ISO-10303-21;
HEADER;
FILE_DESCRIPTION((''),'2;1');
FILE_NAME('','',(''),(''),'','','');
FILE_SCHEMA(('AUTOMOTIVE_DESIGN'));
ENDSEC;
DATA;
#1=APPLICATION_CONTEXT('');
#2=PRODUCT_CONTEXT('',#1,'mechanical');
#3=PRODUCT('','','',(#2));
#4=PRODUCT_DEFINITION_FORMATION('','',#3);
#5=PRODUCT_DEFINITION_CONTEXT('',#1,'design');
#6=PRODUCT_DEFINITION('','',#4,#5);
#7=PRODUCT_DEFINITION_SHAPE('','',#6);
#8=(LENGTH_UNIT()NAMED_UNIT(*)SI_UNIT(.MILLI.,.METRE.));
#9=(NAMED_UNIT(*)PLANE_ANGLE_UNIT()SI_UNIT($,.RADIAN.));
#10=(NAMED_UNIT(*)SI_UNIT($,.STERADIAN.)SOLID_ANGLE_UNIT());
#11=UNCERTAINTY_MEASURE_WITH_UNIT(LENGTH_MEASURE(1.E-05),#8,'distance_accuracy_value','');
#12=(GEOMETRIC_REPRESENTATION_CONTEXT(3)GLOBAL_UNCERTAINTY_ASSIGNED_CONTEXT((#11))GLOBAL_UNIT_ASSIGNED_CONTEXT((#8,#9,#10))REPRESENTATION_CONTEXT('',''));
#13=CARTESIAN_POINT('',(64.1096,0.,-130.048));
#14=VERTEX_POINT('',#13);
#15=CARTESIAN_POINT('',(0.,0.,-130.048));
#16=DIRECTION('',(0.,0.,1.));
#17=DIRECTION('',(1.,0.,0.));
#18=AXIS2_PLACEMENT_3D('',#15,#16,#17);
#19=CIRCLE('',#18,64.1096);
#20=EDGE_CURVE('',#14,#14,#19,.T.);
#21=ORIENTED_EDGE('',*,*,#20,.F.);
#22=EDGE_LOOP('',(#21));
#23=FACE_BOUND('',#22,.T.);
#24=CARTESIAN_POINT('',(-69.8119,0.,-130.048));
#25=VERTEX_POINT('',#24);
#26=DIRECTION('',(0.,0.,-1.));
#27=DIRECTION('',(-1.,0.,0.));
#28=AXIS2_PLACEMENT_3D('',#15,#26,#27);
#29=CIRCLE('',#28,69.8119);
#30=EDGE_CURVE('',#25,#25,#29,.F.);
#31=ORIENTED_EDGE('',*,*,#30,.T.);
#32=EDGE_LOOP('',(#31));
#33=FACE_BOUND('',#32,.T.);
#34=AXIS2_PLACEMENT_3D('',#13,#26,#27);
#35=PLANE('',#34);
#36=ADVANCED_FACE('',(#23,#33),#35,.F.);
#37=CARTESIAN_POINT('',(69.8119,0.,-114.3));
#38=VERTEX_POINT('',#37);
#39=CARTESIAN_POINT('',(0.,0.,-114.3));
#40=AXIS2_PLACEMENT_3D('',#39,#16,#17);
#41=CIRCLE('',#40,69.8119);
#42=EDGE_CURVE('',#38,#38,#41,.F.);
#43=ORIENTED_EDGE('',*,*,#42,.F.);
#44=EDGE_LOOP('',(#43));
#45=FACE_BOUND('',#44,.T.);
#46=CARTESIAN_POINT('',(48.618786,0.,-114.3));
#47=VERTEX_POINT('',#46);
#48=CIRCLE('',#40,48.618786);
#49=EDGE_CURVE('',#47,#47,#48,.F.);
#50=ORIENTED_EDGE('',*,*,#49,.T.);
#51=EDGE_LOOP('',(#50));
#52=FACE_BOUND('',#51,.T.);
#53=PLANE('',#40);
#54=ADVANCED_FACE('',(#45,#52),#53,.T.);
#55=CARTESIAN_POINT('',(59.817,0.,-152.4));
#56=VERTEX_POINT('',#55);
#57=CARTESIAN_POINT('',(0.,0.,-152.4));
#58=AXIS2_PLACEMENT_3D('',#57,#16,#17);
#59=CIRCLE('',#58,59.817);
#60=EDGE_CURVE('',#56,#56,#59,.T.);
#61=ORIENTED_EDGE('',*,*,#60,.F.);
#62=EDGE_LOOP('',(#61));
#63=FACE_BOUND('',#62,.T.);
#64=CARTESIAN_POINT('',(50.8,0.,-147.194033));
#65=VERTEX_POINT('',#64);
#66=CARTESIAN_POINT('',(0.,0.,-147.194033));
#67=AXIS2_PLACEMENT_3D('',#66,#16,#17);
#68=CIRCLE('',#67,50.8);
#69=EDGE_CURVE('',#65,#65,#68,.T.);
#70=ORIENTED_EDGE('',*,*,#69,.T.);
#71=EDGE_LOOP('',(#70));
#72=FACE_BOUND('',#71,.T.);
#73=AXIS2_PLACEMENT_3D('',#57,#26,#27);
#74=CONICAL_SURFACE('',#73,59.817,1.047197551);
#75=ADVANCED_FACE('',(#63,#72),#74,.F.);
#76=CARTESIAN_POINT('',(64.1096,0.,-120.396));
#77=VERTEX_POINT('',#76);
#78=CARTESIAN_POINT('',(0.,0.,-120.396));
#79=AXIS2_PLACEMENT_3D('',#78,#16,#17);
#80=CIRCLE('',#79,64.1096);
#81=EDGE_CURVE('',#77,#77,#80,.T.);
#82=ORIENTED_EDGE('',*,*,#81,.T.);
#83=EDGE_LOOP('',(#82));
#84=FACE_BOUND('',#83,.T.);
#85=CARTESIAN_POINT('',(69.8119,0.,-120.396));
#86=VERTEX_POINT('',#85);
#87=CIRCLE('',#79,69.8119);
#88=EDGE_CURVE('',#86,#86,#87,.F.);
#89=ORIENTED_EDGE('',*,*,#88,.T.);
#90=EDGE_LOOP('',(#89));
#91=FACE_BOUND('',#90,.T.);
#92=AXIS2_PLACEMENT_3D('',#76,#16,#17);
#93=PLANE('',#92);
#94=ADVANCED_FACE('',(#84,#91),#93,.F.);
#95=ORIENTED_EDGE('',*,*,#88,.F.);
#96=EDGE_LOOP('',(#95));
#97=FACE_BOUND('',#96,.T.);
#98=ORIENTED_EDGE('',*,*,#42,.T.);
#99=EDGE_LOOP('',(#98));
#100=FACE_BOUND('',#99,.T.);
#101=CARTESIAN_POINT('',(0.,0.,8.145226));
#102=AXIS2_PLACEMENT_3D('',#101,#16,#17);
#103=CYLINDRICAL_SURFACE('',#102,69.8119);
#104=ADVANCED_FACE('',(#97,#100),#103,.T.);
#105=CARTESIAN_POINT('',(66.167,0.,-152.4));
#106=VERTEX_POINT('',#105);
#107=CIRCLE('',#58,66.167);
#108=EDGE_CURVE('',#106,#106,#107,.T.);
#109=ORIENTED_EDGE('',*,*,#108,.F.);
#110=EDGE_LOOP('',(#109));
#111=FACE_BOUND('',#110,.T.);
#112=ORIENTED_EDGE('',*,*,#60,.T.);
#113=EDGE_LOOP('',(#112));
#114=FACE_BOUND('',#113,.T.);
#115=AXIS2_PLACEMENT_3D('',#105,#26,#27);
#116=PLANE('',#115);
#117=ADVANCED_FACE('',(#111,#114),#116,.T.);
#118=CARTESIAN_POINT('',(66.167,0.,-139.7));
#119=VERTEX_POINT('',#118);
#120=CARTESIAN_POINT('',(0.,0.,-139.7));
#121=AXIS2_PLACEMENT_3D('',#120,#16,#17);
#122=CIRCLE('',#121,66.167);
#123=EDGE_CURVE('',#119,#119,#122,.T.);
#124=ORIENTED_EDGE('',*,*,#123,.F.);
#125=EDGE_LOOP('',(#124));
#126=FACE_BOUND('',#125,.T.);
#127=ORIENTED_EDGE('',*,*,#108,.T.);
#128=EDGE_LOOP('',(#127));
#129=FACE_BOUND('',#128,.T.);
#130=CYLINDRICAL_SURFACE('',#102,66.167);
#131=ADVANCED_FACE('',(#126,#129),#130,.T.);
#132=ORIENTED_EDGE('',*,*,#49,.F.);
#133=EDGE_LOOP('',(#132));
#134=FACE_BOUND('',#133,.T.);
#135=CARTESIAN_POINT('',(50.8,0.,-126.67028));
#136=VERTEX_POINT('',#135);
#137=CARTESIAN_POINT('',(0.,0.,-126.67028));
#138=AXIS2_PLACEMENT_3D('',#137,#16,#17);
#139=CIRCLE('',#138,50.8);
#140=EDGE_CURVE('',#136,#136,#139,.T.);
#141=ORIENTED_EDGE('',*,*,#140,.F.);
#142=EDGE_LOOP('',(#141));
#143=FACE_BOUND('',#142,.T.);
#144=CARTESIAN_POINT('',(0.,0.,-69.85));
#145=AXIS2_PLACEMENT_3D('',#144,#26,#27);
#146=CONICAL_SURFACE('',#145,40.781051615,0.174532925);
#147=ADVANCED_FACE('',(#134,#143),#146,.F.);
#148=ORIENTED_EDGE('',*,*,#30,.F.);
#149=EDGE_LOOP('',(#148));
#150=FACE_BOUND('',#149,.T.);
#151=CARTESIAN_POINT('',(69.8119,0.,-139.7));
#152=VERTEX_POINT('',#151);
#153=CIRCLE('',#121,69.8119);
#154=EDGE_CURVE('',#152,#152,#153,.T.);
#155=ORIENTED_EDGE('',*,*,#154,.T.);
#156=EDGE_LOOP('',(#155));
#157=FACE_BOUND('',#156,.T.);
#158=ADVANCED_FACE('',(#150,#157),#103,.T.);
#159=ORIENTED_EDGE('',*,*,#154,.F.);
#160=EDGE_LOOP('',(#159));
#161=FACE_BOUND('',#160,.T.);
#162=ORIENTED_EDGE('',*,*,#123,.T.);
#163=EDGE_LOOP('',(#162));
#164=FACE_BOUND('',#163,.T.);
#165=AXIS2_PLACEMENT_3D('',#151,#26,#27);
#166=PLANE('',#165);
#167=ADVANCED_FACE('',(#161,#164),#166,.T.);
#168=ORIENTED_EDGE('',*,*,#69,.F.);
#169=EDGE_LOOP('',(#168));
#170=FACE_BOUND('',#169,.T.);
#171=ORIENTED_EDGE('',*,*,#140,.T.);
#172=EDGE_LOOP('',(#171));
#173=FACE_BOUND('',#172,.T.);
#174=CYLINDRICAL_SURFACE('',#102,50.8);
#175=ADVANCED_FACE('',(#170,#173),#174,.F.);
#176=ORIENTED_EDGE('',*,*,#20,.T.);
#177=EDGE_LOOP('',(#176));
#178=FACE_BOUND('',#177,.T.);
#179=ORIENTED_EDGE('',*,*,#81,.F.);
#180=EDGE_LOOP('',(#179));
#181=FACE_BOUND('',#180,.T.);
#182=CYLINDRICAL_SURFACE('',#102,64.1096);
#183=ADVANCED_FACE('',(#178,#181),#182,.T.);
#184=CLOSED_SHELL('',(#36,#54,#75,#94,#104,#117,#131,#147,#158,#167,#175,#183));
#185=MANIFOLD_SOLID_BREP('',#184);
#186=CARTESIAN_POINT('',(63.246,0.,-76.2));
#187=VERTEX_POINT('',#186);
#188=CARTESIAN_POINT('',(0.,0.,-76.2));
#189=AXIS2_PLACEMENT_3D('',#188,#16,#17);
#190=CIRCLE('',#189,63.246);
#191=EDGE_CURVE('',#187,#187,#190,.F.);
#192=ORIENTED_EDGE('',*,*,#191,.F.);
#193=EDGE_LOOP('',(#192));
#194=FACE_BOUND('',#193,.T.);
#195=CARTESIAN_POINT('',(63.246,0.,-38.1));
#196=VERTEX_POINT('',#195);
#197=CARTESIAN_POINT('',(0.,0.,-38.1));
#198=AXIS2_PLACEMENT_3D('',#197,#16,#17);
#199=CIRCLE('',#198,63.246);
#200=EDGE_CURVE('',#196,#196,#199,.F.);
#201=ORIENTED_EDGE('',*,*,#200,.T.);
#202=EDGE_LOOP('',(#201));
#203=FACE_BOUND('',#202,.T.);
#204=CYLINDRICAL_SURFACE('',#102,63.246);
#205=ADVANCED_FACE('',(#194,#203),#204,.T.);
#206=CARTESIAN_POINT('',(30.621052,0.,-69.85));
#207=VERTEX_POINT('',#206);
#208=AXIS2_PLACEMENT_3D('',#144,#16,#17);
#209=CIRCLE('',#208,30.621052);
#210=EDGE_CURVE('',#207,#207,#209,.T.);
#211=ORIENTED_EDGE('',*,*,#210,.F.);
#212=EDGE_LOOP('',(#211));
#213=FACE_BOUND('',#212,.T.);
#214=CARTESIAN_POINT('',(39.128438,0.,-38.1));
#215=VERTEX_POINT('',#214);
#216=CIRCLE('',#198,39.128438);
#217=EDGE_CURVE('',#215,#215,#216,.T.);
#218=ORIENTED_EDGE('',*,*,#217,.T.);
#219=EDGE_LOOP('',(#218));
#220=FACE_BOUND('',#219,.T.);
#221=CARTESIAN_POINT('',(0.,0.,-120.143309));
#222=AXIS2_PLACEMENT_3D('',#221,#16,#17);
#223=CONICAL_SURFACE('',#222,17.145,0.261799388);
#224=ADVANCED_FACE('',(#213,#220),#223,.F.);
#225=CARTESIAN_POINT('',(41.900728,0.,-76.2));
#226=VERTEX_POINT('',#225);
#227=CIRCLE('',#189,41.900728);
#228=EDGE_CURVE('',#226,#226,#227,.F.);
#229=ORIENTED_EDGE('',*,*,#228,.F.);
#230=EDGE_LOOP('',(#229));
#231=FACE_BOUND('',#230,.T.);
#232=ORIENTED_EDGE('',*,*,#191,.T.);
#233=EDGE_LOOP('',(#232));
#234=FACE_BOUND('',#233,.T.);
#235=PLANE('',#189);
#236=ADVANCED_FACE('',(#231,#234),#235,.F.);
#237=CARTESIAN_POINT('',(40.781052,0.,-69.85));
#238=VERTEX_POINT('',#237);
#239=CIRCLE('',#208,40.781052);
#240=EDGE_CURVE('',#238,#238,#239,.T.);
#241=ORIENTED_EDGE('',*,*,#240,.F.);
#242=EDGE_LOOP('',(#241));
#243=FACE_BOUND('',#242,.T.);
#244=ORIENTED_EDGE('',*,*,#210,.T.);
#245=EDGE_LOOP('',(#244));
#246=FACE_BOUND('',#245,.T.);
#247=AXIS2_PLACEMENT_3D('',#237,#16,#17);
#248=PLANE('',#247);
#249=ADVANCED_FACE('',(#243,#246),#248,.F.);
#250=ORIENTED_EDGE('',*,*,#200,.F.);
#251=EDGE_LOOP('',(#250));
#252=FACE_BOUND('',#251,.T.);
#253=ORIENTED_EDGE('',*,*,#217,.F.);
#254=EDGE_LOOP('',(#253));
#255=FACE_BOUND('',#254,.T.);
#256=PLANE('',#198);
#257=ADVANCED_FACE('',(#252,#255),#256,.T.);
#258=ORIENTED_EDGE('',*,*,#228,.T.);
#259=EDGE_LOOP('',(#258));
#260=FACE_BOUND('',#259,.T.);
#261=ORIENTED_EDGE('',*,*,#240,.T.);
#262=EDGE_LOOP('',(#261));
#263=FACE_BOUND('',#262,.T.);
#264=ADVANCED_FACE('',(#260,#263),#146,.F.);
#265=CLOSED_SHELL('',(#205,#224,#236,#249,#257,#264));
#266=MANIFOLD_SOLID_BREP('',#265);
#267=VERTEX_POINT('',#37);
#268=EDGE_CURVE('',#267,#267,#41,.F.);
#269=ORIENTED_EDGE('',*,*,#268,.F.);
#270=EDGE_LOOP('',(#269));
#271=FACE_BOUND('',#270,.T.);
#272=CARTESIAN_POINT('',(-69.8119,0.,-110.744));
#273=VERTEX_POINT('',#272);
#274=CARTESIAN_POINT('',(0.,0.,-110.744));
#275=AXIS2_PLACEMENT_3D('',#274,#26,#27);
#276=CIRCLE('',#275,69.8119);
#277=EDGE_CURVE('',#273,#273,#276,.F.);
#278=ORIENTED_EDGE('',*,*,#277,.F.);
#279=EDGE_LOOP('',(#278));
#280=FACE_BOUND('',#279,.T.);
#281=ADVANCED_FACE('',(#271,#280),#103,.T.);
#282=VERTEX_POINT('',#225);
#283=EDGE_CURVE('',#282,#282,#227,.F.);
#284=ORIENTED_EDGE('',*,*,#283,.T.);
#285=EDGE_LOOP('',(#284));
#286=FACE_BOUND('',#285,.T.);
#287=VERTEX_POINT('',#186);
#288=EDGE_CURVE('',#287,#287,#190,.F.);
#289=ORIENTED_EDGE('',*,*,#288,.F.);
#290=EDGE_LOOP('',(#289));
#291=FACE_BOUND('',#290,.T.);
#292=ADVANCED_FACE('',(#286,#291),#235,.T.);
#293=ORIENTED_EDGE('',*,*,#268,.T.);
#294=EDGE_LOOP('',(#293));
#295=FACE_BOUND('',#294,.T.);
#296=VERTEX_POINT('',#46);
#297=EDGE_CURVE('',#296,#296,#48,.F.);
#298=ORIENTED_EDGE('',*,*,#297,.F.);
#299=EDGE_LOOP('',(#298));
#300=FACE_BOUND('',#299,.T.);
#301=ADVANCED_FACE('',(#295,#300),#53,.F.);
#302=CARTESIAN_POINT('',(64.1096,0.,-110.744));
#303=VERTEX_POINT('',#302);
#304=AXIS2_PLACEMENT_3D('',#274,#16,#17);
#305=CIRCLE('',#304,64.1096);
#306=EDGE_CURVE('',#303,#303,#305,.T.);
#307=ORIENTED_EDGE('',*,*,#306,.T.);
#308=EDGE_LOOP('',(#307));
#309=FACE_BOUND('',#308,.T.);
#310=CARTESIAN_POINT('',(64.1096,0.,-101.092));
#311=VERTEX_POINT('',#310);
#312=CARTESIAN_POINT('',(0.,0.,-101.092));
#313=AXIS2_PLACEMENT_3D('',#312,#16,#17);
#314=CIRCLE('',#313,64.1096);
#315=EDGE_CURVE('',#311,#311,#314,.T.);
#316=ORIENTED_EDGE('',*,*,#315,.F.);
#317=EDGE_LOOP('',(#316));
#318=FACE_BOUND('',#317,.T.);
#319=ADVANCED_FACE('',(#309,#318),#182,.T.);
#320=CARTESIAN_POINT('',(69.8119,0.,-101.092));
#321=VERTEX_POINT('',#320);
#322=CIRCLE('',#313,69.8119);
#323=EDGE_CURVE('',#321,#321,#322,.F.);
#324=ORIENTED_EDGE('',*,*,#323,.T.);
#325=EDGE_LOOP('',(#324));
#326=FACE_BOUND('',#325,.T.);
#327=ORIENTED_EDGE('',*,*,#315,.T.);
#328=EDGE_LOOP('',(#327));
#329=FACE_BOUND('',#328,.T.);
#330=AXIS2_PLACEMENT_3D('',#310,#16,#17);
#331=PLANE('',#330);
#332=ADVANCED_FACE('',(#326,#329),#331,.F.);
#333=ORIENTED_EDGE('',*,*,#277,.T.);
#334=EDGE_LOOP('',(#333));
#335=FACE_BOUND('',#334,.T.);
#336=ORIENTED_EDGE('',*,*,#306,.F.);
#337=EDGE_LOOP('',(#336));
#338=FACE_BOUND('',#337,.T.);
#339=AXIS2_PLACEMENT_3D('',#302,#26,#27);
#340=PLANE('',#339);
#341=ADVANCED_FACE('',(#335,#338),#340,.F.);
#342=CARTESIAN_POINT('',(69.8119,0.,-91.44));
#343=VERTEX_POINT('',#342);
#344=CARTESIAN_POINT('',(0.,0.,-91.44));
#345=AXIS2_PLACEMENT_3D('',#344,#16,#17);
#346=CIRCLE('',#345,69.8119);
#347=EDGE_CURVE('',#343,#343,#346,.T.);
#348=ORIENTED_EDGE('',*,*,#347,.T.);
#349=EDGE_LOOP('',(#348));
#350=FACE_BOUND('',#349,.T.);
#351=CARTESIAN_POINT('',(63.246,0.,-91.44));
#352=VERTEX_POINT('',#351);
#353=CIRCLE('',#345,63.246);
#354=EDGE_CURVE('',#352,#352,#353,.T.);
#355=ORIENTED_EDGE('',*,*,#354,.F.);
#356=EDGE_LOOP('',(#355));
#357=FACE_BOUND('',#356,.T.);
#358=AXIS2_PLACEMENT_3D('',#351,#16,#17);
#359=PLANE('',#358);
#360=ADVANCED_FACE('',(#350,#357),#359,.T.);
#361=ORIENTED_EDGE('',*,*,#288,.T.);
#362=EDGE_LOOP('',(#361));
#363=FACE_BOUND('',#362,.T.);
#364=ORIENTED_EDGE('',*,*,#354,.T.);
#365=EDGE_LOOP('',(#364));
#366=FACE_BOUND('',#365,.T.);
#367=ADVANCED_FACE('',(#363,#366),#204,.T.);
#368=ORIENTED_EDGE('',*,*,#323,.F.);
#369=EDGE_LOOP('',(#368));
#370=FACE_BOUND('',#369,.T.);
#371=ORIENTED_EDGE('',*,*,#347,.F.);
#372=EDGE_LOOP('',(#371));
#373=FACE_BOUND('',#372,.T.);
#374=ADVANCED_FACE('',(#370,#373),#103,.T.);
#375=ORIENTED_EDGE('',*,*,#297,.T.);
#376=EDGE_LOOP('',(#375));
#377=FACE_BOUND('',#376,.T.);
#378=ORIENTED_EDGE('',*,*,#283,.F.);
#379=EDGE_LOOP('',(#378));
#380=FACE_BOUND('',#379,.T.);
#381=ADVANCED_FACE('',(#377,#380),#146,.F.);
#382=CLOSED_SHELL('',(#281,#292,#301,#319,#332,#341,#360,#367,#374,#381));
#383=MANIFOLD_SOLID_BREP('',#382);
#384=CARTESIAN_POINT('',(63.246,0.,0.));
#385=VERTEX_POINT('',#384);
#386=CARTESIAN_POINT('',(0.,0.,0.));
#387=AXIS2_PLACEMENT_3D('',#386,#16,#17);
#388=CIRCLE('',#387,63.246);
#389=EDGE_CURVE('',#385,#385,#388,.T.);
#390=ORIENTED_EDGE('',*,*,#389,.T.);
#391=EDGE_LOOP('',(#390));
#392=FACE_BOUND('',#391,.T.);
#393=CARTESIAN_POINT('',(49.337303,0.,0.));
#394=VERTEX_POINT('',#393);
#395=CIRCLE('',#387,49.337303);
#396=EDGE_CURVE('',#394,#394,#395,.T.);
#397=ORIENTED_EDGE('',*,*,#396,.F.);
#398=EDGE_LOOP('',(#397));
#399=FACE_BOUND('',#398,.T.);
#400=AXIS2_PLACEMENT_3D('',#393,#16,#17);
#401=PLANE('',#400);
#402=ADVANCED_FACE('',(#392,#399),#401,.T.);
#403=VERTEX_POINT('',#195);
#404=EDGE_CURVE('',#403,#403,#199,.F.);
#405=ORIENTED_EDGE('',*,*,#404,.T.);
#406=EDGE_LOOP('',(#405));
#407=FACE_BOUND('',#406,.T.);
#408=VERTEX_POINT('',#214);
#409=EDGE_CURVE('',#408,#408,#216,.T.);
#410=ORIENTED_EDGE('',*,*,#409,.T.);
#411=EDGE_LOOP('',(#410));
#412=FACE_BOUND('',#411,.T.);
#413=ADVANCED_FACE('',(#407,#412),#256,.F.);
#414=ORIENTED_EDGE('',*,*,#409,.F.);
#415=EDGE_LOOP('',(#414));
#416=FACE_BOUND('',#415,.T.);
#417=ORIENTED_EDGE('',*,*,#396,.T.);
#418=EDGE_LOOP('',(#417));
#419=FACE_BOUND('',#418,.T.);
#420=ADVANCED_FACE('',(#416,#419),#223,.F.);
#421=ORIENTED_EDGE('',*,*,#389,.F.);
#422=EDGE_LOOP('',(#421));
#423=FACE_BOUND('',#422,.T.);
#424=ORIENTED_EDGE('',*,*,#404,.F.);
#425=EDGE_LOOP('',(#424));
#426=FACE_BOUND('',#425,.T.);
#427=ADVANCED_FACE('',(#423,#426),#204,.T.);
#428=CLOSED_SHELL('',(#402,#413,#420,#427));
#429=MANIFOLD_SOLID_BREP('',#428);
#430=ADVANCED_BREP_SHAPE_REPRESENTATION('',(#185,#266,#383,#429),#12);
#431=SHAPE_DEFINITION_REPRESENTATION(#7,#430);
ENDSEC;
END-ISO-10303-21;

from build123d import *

# Parameters (mm, degrees)
SKETCH2_W          = 6.35
SKETCH2_H          = 9.652
SPLIT1_START       = -114.3
SPLIT1_2_OUTLINE_R = 69.8119
SPLIT1_2_DEPTH     = 114.3


# Read off the part's stored shape, not the designer's step: Split1
with BuildPart() as part:
    # Sketch1 → Revolve1 (revolve)
    with BuildSketch(Plane(origin=(0, 0, 0), x_dir=(1, 0, 0), z_dir=(0, 1, 0))):
        Polygon((69.8119, 139.7), (69.8119, 91.44), (63.246, 91.44), (63.246, 0), (49.337302706, 0), (17.145, 120.143309313), (17.145, 127.763309313), (59.817, 152.4), (66.167, 152.4), (66.167, 139.7), align=None)
    revolve(axis=Axis((0, 0, 8.145225657), (0, 0, -1)))

    # Sketch2 → Cut-Revolve1 (revolve, cut)
    with BuildSketch(Plane(origin=(0, 0, 0), x_dir=(1, 0, 0), z_dir=(0, 1, 0))):
        with Locations((67.2846, 125.222)):
            Rectangle(SKETCH2_W, SKETCH2_H)
        with Locations((67.2846, 105.918)):
            Rectangle(SKETCH2_W, SKETCH2_H)
    revolve(axis=Axis((0, 0, 8.145225657), (0, 0, -1)), mode=Mode.SUBTRACT)

    # Sketch3 → Cut-Revolve2 (revolve, cut)
    with BuildSketch(Plane(origin=(0, 0, 0), x_dir=(1, 0, 0), z_dir=(0, 1, 0))):
        Polygon((50.8, 147.194032623), (50.8, 126.670279827), (40.781051615, 69.85), (30.621051615, 69.85), (17.145, 120.143309313), (17.145, 127.763309313), align=None)
    revolve(axis=Axis((0, 0, 8.145225657), (0, 0, -1)), mode=Mode.SUBTRACT)

    # Split1 2 outline → Split1 2 (cut)
    with BuildSketch(Plane.XY.offset(SPLIT1_START)):
        Circle(SPLIT1_2_OUTLINE_R)
    extrude(amount=SPLIT1_2_DEPTH, mode=Mode.SUBTRACT)


with BuildPart() as body_2:
    # Split1 outline → Split1 (revolve)
    with BuildSketch(Plane.XZ):
        Polygon((49.337302706, 0), (39.128438475, -38.1), (63.246, -38.1), (63.246, 0), align=None)
    revolve(axis=Axis((0, 0, 0), (0, 0, 1)))


with BuildPart() as body_3:
    # Split1 3 outline → Split1 3 (revolve)
    with BuildSketch(Plane.XZ):
        Polygon((40.781051615, -69.85), (41.900727943, -76.2), (63.246, -76.2), (63.246, -38.1), (39.128438475, -38.1), (30.621051615, -69.85), align=None)
    revolve(axis=Axis((0, 0, 0), (0, 0, 1)))


with BuildPart() as body_4:
    # Split1 4 outline → Split1 4 (revolve)
    with BuildSketch(Plane.XZ):
        Polygon((41.900727943, -76.2), (48.618785908, -114.3), (69.8119, -114.3), (69.8119, -110.744), (64.1096, -110.744), (64.1096, -101.092), (69.8119, -101.092), (69.8119, -91.44), (63.246, -91.44), (63.246, -76.2), align=None)
    revolve(axis=Axis((0, 0, 0), (0, 0, 1)))


solid = Compound([part.part, body_2.part, body_3.part, body_4.part])
